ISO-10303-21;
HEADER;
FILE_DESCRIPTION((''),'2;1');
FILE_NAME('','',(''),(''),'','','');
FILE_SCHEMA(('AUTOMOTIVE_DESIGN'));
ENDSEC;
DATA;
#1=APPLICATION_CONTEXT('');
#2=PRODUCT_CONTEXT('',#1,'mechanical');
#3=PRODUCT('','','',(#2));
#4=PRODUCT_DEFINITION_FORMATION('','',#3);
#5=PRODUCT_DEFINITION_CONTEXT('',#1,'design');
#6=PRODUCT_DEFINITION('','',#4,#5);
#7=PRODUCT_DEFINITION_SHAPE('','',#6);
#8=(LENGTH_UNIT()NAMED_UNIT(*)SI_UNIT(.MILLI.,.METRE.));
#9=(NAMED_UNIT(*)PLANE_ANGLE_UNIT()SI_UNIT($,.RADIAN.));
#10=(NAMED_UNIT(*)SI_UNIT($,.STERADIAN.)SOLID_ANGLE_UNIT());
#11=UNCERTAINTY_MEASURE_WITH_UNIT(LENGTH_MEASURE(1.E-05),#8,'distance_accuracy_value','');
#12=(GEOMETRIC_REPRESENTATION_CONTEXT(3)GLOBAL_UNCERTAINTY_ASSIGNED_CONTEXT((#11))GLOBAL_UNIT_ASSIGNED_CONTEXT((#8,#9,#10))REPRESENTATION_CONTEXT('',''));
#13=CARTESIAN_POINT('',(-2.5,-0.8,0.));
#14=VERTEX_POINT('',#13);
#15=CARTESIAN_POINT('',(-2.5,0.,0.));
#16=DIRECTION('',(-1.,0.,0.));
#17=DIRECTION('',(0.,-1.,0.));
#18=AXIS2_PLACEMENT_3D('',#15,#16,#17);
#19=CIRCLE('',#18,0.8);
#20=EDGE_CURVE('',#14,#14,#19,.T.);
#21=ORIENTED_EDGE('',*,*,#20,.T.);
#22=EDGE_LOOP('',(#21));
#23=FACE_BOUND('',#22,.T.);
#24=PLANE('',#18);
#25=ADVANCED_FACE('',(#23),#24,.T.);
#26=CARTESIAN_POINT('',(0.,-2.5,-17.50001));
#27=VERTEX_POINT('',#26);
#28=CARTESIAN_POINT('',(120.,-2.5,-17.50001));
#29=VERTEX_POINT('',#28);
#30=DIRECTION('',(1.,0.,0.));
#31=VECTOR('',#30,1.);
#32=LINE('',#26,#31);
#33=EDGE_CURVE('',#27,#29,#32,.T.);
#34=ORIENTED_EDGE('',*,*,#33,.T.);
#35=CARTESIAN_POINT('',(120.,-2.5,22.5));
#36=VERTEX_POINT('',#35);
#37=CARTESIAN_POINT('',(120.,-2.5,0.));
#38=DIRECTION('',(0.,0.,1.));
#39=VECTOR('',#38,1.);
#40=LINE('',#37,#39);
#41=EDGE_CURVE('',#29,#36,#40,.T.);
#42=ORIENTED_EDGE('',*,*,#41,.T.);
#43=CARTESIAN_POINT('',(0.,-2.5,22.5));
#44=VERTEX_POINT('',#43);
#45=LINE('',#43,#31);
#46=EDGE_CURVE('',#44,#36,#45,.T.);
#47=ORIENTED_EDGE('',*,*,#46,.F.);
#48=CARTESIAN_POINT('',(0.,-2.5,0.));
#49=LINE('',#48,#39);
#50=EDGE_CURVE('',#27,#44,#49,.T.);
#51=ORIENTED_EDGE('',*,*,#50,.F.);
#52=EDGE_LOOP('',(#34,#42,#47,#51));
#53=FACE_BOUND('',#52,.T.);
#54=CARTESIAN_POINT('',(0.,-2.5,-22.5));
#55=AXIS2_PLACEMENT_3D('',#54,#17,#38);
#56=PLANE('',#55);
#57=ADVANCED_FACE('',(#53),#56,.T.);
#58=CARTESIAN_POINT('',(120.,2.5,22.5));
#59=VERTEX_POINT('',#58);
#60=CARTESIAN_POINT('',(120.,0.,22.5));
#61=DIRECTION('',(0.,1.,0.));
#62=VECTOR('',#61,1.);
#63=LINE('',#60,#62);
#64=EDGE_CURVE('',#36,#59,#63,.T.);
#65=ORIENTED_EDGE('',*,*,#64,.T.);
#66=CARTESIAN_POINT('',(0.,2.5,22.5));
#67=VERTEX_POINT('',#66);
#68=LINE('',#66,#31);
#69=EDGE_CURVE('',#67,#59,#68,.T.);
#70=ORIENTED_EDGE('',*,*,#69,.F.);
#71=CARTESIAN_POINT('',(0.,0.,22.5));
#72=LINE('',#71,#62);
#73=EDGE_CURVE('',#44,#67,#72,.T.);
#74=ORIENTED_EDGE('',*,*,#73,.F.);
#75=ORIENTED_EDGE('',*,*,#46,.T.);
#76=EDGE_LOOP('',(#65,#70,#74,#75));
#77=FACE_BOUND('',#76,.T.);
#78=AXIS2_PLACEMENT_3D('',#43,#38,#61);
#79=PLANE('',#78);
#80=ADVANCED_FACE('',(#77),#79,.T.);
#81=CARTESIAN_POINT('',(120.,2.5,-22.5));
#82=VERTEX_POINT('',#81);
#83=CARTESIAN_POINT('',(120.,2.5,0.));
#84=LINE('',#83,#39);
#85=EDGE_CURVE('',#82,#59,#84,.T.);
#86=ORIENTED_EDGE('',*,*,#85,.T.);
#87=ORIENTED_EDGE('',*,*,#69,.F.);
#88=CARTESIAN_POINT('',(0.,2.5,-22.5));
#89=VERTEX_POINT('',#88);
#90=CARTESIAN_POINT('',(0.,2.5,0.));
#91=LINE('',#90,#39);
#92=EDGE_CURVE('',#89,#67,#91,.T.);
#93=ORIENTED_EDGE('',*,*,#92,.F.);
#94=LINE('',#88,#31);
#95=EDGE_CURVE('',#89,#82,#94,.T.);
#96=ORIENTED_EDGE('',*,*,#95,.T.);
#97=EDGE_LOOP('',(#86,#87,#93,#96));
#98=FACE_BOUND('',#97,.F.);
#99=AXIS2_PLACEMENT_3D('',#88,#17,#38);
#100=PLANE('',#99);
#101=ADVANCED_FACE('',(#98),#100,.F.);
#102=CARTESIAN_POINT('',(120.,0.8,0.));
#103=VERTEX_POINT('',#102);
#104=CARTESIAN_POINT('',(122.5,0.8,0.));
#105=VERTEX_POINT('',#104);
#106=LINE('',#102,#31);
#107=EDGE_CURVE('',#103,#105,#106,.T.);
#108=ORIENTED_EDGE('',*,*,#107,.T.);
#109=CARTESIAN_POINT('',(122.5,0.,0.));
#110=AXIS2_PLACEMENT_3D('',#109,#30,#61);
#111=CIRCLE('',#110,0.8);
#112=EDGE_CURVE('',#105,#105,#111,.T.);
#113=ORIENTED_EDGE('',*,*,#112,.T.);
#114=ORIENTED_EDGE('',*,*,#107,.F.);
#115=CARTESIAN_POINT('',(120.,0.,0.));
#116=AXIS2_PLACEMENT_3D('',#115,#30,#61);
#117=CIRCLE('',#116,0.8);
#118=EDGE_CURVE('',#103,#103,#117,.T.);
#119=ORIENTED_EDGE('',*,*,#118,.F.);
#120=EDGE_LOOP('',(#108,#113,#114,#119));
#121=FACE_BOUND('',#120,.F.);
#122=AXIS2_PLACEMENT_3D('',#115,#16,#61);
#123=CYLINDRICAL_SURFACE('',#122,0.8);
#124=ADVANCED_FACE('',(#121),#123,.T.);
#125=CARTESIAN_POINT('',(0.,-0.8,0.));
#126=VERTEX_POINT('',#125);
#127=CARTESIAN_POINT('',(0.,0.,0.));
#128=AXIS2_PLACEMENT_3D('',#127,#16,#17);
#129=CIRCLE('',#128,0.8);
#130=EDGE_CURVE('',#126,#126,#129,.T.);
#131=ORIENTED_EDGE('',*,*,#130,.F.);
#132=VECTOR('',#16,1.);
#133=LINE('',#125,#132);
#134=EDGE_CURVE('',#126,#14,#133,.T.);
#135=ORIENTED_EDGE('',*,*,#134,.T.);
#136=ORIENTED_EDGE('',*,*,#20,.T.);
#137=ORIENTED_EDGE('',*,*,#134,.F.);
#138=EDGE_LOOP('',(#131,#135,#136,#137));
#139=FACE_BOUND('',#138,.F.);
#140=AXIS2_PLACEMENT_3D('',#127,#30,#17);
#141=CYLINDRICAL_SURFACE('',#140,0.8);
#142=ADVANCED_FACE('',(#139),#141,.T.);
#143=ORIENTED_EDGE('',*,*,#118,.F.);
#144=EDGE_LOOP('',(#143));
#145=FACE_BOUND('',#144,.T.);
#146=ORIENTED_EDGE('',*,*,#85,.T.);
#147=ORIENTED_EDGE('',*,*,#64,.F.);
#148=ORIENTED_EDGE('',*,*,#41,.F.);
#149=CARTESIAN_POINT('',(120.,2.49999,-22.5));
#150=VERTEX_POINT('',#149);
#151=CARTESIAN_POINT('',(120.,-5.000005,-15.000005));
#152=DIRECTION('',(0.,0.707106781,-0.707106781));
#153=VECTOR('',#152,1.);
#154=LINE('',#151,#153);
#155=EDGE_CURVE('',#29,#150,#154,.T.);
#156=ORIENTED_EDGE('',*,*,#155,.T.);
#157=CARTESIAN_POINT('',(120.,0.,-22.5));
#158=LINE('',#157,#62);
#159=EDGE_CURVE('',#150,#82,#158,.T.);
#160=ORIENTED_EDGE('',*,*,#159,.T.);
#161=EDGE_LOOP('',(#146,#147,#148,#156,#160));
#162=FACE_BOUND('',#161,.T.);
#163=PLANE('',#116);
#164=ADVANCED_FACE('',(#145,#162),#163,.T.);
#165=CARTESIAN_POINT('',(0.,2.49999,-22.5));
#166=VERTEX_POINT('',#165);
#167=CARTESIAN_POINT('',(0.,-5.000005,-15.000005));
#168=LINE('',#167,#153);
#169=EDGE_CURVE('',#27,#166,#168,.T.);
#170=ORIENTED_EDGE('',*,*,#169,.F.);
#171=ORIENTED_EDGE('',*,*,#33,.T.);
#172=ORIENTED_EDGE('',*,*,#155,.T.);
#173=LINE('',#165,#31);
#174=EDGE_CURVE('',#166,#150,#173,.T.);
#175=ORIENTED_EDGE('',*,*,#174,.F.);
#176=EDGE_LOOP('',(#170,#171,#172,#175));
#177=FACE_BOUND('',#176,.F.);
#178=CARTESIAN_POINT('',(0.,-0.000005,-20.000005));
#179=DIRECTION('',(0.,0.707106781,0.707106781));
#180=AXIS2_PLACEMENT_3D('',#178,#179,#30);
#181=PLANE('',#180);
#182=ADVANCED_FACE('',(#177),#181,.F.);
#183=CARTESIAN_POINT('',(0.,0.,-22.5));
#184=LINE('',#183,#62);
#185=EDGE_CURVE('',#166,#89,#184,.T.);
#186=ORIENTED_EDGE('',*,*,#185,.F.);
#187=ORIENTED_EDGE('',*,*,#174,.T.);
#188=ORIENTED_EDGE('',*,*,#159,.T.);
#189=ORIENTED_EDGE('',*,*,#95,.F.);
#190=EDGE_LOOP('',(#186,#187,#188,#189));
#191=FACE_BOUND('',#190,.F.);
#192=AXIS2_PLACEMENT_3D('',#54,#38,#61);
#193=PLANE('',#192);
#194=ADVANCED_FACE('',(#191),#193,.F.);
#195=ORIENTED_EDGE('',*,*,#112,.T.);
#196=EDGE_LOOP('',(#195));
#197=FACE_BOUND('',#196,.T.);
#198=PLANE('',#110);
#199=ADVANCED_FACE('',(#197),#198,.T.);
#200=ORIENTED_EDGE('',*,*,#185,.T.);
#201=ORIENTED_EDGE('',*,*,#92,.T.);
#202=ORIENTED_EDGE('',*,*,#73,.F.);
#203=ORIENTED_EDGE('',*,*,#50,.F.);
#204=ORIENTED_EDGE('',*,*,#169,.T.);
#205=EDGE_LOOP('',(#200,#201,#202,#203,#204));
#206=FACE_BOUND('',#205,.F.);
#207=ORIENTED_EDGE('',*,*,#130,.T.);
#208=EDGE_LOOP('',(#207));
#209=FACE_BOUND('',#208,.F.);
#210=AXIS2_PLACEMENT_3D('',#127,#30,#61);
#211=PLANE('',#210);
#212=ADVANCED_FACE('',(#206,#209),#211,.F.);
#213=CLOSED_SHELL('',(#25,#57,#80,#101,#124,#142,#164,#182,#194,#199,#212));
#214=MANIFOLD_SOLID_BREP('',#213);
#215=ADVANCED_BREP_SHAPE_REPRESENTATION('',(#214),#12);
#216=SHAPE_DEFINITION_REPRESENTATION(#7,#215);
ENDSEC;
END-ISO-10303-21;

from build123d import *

# Parameters (mm, degrees)
F0_W     = 5
F0_H     = 45
F1_DEPTH = 120
F2_SIZE  = 4.99999
F3_R     = 0.8
F4_DEPTH = 2.5
F5_R     = 0.8
F6_DEPTH = 2.5


# Not quite as in the source:
# - a fillet or chamfer is up to 0.001 mm smaller than in the source, because OpenCascade refuses the exact size


with BuildPart() as f1:
    # F0 (on Right) → F1 (new body)
    with BuildSketch(Plane.YZ):
        Rectangle(F0_W, F0_H)
    extrude(amount=F1_DEPTH)

    # F2 (size 5 in the source; OpenCascade refuses exactly that, so slightly less here)
    f2_edges = [f1.edges().sort_by_distance(p)[0] for p in [
        (60, -2.5, -22.5),
    ]]
    chamfer(f2_edges, length=F2_SIZE)

    # F3 (on face) → F4 (join)
    with BuildSketch(Plane(origin=(0, 0, 0), x_dir=(0, -1, 0), z_dir=(-1, 0, 0))):
        Circle(F3_R)
    extrude(amount=F4_DEPTH)

    # F5 (on face) → F6 (join)
    with BuildSketch(Plane.YZ.offset(120)):
        Circle(F5_R)
    extrude(amount=F6_DEPTH)


solid = f1.part
